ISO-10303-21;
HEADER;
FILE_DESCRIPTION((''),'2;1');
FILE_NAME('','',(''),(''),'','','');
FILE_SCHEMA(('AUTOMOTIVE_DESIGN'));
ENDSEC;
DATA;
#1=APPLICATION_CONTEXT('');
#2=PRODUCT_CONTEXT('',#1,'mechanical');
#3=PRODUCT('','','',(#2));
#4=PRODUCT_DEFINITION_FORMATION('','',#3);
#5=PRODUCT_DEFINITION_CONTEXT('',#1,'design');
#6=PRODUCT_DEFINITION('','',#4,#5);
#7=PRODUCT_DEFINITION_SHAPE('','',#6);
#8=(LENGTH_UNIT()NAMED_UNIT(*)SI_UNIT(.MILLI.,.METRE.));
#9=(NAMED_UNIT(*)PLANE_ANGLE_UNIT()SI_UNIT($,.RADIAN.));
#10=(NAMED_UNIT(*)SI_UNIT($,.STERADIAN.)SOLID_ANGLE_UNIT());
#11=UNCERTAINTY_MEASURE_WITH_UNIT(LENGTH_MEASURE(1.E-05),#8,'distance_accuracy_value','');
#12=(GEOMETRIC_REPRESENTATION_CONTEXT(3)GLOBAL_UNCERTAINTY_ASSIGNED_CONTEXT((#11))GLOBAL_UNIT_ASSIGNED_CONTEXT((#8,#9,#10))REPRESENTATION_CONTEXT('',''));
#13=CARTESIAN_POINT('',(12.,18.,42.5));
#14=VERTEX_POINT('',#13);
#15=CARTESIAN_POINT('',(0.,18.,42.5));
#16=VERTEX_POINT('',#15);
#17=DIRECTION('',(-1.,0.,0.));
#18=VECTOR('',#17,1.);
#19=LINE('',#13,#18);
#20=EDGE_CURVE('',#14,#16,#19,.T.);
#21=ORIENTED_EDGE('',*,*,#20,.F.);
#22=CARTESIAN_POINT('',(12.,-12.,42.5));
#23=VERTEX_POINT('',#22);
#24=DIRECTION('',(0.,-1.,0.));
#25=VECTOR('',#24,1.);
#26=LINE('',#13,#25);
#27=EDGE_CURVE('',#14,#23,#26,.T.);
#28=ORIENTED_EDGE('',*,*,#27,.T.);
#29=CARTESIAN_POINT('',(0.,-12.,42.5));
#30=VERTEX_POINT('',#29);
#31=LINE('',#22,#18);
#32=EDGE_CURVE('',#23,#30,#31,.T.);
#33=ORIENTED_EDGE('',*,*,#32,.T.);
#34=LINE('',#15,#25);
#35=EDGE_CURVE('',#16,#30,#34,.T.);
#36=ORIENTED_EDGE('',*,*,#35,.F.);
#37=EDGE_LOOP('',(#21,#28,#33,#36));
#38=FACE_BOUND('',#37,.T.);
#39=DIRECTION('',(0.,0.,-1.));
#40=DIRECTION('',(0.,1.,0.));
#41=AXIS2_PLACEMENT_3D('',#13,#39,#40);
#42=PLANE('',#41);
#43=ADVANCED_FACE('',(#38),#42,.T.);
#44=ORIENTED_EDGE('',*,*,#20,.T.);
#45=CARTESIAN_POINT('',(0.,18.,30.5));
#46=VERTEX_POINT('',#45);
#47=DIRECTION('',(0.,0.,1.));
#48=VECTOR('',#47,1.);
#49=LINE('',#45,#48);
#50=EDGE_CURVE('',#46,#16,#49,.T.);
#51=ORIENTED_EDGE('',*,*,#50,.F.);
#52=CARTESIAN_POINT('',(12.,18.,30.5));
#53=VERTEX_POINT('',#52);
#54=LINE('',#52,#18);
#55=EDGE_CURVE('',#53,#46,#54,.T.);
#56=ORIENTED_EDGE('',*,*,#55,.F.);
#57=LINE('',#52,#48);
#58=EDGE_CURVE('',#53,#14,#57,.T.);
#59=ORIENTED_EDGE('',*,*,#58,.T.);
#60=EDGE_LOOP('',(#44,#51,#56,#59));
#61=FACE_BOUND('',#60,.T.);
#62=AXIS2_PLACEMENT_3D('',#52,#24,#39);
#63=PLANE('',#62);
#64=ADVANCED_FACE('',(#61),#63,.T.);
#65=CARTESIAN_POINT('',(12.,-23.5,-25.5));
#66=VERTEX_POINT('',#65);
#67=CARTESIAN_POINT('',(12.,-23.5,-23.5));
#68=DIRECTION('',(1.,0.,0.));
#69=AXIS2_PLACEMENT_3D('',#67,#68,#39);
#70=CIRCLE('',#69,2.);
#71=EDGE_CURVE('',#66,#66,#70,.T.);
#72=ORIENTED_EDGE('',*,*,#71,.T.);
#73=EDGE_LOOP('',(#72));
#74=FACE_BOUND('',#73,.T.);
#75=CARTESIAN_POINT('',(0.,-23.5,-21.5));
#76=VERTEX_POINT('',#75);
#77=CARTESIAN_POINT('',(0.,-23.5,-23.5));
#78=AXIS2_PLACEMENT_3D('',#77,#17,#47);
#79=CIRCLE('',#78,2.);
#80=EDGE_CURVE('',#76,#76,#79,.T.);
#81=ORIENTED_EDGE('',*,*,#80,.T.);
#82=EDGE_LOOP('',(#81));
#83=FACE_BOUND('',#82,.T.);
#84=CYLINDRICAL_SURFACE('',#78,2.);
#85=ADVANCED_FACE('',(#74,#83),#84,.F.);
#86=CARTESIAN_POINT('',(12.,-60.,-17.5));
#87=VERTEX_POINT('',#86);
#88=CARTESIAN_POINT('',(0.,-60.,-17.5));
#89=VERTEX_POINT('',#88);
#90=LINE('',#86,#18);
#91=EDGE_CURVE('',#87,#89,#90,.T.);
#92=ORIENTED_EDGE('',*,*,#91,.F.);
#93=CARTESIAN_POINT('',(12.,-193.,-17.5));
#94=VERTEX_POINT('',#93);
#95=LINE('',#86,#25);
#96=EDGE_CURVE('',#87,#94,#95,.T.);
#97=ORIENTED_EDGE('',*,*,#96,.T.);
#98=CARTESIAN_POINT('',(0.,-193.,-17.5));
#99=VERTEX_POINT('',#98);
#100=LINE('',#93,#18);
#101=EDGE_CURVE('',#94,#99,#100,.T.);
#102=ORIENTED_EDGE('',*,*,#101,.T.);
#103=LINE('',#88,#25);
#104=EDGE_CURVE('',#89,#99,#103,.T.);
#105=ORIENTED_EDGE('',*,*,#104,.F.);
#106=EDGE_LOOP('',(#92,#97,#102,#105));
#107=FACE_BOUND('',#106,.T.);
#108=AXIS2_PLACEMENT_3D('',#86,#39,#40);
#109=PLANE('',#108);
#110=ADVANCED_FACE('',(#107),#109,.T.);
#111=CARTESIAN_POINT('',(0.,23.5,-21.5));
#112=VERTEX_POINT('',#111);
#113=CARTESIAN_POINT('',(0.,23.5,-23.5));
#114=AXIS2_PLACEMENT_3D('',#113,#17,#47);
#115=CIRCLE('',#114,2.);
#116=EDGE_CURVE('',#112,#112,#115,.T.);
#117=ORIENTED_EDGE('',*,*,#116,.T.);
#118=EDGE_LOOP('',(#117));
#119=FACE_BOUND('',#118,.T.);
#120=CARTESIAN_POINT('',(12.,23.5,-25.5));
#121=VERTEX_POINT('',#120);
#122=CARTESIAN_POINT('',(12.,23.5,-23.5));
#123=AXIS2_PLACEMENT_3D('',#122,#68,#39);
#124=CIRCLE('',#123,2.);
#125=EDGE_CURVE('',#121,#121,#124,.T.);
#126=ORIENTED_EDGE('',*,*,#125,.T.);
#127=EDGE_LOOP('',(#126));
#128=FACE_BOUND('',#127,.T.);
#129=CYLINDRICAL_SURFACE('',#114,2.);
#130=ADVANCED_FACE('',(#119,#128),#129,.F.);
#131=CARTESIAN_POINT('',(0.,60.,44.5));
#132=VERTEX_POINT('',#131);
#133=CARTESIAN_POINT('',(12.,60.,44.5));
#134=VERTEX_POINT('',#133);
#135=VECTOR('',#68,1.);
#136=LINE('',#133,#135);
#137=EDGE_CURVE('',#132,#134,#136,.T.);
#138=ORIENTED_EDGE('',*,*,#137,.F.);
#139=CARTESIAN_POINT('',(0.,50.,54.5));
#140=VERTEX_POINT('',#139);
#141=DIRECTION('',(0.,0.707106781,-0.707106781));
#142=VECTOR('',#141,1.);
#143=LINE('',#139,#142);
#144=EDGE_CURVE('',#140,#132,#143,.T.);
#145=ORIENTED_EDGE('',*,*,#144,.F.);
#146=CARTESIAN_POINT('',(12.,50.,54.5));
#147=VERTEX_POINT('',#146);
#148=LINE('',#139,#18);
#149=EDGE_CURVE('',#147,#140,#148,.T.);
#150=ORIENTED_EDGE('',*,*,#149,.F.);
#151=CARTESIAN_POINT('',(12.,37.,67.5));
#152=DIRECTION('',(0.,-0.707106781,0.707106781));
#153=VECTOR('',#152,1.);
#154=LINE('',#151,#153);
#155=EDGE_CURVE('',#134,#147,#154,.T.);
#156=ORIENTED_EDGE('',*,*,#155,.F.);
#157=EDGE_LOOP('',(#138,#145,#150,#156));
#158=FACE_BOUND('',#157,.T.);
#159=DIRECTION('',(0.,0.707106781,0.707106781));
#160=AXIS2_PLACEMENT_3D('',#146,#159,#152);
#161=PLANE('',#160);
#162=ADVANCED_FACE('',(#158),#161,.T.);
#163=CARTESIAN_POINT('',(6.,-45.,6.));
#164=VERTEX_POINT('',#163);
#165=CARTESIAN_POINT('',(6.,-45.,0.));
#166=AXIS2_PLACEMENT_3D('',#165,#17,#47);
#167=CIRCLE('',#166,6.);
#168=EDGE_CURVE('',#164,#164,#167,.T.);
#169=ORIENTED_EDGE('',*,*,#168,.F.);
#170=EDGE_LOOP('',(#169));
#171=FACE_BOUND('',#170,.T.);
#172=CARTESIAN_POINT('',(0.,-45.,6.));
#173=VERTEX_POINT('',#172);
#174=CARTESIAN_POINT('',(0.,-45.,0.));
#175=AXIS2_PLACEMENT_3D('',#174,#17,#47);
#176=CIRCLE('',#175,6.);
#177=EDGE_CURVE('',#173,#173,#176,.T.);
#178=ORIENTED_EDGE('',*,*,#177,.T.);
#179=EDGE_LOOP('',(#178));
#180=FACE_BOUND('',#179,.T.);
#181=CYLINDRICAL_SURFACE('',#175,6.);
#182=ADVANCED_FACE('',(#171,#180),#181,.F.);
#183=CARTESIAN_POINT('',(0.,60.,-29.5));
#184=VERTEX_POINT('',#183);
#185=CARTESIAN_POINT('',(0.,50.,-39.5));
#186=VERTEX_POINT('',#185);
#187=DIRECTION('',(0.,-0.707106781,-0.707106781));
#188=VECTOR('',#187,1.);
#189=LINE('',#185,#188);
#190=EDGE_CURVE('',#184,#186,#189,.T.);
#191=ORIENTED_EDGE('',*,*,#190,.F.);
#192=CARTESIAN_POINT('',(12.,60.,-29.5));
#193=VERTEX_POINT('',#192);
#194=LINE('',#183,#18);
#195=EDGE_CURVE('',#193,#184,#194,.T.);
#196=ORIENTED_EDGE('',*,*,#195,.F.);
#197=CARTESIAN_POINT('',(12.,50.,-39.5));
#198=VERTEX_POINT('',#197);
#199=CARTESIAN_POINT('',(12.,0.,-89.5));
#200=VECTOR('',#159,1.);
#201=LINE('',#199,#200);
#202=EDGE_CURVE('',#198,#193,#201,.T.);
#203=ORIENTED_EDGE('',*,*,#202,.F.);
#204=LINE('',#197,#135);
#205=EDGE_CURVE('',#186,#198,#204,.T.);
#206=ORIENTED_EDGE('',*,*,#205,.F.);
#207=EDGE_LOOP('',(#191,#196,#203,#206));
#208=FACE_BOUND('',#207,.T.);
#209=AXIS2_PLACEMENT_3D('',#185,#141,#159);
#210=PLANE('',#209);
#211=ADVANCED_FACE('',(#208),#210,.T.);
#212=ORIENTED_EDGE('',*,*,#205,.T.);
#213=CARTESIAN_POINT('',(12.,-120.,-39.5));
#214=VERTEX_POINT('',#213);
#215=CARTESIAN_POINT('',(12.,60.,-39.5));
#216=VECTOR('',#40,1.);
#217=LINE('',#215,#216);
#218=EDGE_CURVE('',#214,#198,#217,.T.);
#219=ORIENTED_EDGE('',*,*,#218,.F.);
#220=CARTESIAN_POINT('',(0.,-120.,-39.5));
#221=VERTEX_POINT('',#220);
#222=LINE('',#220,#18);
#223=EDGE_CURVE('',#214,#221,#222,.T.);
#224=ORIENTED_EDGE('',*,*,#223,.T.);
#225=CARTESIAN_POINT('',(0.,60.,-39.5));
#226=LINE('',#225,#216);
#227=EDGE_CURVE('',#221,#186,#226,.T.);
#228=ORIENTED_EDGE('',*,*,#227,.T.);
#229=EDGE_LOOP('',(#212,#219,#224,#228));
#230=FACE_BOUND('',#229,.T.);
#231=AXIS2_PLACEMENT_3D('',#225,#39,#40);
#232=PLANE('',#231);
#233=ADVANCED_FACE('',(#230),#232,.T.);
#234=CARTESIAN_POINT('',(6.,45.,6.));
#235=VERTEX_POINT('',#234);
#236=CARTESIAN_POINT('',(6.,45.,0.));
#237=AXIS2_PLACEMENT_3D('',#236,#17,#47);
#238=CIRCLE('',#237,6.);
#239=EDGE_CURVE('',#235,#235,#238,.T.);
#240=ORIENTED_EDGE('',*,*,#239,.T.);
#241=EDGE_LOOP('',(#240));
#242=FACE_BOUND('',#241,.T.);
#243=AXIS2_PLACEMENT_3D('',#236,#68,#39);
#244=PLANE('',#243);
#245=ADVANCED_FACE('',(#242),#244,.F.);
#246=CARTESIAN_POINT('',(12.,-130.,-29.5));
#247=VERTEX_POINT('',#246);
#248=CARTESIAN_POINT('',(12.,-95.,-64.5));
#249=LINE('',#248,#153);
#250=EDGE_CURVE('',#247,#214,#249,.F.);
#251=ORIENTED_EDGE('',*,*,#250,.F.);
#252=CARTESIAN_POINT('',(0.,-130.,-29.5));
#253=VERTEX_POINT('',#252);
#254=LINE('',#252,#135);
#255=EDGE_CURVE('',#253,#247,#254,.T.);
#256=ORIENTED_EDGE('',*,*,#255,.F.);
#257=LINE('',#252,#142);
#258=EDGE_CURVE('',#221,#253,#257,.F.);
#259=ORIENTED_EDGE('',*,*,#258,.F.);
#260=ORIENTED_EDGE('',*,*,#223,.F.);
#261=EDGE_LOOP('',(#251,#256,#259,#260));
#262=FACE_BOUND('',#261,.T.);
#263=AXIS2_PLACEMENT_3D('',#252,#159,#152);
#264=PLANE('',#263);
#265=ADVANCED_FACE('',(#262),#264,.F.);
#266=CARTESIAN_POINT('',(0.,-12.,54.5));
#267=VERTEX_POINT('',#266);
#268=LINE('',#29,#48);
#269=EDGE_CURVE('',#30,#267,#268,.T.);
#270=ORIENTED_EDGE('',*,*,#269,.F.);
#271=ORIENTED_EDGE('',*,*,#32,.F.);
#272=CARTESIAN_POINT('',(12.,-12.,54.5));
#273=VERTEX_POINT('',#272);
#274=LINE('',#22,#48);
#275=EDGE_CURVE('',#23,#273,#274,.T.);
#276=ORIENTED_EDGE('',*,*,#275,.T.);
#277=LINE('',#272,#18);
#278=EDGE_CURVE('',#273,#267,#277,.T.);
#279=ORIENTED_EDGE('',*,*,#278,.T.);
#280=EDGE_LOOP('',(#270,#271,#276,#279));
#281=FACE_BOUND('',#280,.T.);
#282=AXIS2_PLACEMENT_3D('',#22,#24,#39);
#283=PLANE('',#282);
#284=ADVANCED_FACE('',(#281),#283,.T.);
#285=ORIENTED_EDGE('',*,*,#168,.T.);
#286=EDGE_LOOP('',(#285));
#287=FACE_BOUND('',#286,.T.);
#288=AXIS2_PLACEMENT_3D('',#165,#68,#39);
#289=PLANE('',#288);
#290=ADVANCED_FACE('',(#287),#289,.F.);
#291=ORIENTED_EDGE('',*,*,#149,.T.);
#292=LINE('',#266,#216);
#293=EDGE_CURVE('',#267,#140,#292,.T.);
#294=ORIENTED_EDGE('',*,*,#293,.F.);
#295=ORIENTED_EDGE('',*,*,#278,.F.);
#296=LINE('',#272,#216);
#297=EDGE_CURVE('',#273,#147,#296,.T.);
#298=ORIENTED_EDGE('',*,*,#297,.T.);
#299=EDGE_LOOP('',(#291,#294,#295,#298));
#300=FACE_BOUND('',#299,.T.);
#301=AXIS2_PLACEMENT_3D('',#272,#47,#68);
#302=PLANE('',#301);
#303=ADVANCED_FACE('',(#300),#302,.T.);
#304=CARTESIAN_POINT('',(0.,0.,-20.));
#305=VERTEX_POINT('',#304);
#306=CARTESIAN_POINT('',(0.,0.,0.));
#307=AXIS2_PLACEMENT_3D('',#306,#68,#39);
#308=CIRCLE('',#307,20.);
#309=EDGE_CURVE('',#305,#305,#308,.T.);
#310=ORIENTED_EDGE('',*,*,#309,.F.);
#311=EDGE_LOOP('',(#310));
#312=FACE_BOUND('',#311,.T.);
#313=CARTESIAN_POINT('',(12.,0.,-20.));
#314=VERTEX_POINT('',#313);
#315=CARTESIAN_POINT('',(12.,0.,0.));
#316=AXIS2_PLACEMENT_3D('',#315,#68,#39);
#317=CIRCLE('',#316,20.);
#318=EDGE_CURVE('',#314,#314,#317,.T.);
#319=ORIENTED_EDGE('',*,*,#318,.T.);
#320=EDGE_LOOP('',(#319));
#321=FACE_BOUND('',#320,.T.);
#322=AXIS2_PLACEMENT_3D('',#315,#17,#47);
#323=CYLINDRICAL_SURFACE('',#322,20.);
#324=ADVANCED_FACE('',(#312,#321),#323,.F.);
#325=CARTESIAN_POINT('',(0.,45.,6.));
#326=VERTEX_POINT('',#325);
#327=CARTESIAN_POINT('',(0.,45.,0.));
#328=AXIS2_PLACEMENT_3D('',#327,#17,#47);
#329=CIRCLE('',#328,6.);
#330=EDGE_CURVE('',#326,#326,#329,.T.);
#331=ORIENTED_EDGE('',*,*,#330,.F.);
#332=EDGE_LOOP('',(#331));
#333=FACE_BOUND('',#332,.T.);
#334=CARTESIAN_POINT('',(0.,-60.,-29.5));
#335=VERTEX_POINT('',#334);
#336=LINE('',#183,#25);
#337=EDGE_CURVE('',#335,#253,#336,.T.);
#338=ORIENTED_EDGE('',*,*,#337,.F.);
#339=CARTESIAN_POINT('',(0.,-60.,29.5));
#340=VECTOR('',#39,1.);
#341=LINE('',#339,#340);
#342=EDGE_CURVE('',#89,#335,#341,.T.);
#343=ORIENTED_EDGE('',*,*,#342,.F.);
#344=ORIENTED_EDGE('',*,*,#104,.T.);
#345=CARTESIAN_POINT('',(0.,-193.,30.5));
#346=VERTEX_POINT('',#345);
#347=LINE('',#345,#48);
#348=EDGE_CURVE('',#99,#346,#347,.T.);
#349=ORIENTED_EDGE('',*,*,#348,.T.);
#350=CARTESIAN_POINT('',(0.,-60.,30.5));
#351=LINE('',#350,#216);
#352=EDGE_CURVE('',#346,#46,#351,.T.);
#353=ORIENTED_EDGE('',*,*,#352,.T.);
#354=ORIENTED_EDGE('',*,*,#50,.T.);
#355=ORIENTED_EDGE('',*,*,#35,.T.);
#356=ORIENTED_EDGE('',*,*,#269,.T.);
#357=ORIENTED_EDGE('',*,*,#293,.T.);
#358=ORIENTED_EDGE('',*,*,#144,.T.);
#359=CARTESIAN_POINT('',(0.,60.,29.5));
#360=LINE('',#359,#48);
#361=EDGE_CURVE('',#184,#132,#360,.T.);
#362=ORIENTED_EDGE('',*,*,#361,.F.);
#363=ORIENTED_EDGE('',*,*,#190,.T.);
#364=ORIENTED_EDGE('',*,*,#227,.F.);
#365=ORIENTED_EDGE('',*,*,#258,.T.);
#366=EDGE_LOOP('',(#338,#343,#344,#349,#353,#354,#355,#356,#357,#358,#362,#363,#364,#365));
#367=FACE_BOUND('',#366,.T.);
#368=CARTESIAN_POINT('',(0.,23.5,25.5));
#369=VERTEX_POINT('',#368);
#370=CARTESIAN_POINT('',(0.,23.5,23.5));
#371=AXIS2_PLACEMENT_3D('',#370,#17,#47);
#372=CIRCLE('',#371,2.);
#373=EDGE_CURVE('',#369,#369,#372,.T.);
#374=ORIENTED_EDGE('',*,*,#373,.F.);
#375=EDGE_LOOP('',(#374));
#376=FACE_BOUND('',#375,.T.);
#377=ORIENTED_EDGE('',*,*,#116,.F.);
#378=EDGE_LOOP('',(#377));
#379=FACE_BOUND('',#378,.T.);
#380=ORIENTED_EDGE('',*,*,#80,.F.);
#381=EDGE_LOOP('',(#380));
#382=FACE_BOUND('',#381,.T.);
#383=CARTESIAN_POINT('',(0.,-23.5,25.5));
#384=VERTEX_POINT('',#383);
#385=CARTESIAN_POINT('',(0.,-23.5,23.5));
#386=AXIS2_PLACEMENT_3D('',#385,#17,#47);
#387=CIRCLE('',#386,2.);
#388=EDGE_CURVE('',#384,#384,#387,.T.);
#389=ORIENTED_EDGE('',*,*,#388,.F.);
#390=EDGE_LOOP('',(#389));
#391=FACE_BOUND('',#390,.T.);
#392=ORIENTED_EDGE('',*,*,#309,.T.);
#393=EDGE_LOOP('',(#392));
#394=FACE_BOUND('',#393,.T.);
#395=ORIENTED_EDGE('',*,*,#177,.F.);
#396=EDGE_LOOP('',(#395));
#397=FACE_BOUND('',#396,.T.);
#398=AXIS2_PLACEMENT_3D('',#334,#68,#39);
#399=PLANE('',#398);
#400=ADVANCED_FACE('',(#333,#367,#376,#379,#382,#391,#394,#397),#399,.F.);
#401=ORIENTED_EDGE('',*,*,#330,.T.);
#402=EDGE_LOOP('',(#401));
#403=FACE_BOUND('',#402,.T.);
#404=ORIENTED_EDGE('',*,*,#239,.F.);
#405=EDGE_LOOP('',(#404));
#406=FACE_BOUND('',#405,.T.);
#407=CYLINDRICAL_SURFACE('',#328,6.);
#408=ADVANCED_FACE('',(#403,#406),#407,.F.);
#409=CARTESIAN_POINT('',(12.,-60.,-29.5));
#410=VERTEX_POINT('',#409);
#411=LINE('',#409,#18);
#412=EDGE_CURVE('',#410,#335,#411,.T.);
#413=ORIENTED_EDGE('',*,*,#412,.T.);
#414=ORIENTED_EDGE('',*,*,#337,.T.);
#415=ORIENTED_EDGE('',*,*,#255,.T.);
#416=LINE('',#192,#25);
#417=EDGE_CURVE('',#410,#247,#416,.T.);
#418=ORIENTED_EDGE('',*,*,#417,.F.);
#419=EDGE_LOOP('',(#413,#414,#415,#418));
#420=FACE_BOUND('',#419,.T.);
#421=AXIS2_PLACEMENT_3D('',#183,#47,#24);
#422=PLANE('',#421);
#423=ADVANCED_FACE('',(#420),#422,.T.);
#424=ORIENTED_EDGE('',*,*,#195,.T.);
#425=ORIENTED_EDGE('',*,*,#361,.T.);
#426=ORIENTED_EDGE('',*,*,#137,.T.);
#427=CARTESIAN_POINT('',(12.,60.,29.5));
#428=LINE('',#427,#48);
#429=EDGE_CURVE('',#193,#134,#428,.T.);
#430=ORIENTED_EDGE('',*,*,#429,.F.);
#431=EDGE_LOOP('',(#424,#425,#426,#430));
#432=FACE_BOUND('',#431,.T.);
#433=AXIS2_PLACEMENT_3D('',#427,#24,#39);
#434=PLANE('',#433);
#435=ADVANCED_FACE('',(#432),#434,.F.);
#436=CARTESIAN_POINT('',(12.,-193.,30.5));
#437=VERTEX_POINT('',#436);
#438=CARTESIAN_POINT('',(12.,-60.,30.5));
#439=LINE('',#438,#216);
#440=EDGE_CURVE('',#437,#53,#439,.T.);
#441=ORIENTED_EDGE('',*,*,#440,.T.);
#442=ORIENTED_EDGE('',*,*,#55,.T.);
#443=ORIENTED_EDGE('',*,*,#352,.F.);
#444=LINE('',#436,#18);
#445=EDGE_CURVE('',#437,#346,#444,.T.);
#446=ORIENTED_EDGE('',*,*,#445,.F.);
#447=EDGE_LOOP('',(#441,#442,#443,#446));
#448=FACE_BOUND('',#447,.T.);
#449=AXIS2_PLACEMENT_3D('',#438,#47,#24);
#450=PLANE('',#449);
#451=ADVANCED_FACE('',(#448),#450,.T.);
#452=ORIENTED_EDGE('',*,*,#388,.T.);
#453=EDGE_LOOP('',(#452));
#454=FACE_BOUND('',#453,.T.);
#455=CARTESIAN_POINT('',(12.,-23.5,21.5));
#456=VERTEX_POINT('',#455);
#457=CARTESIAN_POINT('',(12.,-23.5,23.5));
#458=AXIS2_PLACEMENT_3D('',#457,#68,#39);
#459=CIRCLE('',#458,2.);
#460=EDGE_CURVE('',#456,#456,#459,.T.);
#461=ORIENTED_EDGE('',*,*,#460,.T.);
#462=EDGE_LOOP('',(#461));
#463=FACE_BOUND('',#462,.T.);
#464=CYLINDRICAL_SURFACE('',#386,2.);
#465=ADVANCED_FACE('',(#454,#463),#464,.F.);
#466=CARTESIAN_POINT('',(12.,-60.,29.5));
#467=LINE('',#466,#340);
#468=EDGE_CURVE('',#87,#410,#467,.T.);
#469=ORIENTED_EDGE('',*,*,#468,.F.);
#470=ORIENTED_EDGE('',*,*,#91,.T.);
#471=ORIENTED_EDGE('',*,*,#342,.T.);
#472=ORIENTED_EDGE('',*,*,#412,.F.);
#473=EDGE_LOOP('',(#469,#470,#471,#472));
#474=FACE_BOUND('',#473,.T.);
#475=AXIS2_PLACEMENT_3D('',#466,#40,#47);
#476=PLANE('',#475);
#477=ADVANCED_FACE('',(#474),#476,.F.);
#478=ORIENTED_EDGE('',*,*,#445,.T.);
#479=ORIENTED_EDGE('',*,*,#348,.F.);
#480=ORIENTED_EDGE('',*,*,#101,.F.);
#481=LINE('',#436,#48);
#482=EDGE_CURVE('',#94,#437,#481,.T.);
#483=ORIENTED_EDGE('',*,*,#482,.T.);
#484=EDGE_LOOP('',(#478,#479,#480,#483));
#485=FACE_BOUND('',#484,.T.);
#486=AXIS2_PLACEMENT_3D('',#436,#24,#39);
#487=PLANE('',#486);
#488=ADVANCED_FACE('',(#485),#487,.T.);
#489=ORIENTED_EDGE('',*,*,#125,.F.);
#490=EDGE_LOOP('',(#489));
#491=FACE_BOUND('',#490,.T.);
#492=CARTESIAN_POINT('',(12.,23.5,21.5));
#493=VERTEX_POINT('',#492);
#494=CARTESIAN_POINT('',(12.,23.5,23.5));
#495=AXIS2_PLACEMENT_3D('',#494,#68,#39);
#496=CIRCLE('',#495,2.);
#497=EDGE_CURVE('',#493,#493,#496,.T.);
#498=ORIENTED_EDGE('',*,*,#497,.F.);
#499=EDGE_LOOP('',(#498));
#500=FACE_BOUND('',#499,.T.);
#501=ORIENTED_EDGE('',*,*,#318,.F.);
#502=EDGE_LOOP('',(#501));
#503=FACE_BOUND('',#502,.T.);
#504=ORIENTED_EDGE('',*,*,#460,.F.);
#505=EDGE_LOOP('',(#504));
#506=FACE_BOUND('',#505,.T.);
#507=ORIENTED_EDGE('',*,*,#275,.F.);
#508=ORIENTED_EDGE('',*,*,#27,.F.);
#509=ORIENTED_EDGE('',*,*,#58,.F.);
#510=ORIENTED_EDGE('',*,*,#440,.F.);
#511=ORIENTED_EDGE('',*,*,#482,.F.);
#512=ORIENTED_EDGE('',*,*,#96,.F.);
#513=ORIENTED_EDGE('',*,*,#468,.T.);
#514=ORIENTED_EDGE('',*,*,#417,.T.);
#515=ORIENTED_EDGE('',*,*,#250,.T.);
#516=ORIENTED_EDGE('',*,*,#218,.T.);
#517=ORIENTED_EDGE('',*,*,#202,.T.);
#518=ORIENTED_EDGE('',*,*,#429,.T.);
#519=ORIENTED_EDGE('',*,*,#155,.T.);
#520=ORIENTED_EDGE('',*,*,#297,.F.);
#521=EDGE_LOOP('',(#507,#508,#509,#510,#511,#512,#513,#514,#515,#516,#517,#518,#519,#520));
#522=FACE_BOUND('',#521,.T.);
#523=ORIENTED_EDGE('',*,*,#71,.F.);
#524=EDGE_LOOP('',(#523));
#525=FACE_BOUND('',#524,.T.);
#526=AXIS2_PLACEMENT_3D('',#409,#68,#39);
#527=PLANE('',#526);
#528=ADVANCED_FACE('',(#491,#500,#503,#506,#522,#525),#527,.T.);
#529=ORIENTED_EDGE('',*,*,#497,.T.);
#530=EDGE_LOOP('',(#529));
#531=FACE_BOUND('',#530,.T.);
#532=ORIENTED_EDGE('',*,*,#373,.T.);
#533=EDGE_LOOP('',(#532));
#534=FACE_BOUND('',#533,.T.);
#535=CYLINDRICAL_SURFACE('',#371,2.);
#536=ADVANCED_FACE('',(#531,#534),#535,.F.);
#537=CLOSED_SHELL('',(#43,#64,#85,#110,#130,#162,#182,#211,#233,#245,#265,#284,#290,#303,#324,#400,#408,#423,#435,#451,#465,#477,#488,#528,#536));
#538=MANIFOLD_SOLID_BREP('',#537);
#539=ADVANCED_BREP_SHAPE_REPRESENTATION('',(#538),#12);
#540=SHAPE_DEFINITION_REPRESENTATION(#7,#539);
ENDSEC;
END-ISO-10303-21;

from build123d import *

# Parameters (mm, degrees)
SKETCH1_W                = 59
SKETCH1_H                = 120
SKETCH1_R                = 20
BOSS_EXTRUDE1_DEPTH      = 12
F_4_0_4_DIAMETER_HOLE1_D = 4
HOLE1_D                  = 12
HOLE1_DEPTH              = 6
BOSS_EXTRUDE2_DEPTH      = 12
SKETCH9_W                = 48
SKETCH9_H                = 133
BOSS_EXTRUDE3_DEPTH      = 12
SKETCH11_W               = 10
SKETCH11_H               = 190
BOSS_EXTRUDE4_DEPTH      = 12
CHAMFER1_SIZE            = 10
CHAMFER2_SIZE            = 10


with BuildPart() as part:
    # Sketch1 → Boss-Extrude1 (new body)
    with BuildSketch(Plane(origin=(0, 0, 0), x_dir=(0, 0, -1), z_dir=(1, 0, 0))):
        Rectangle(SKETCH1_W, SKETCH1_H)
        Circle(SKETCH1_R, mode=Mode.SUBTRACT)
    extrude(amount=BOSS_EXTRUDE1_DEPTH)

    # Ø4.0 (4) Diameter Hole1 (through all)
    with Locations(Plane.ZY):
        with Locations((-23.5, 23.5), (23.5, 23.5), (23.5, -23.5), (-23.5, -23.5)):
            Hole(F_4_0_4_DIAMETER_HOLE1_D / 2)

    # Hole1
    with Locations(Plane.ZY):
        with Locations((0, 45), (0, -45)):
            Hole(HOLE1_D / 2, depth=HOLE1_DEPTH)

    # Sketch8 → Boss-Extrude2 (add)
    with BuildSketch(Plane.ZY):
        Polygon((29.5, 60), (29.5, -60), (30.5, -60), (30.5, 18), (42.5, 18), (42.5, -12), (54.5, -12), (54.5, 60), align=None)
    extrude(amount=-BOSS_EXTRUDE2_DEPTH)

    # Sketch9 → Boss-Extrude3 (add)
    with BuildSketch(Plane.ZY):
        with Locations((6.5, -126.5)):
            Rectangle(SKETCH9_W, SKETCH9_H)
    extrude(amount=-BOSS_EXTRUDE3_DEPTH)

    # Sketch11 → Boss-Extrude4 (add)
    with BuildSketch(Plane(origin=(12, 0, 0), x_dir=(0, 0, -1), z_dir=(1, 0, 0))):
        with Locations((34.5, -35)):
            Rectangle(SKETCH11_W, SKETCH11_H)
    extrude(amount=-BOSS_EXTRUDE4_DEPTH)

    # Chamfer1
    chamfer1_edges = [part.edges().sort_by_distance(p)[0] for p in [
        (6, 60, 54.5),
        (6, 60, -39.5),
    ]]
    chamfer(chamfer1_edges, length=CHAMFER1_SIZE)

    # Chamfer2
    chamfer2_edges = [part.edges().sort_by_distance(p)[0] for p in [
        (6, -130, -39.5),
    ]]
    chamfer(chamfer2_edges, length=CHAMFER2_SIZE - 0.0001)  # a hair under: the kernel refuses the full size


solid = part.part
